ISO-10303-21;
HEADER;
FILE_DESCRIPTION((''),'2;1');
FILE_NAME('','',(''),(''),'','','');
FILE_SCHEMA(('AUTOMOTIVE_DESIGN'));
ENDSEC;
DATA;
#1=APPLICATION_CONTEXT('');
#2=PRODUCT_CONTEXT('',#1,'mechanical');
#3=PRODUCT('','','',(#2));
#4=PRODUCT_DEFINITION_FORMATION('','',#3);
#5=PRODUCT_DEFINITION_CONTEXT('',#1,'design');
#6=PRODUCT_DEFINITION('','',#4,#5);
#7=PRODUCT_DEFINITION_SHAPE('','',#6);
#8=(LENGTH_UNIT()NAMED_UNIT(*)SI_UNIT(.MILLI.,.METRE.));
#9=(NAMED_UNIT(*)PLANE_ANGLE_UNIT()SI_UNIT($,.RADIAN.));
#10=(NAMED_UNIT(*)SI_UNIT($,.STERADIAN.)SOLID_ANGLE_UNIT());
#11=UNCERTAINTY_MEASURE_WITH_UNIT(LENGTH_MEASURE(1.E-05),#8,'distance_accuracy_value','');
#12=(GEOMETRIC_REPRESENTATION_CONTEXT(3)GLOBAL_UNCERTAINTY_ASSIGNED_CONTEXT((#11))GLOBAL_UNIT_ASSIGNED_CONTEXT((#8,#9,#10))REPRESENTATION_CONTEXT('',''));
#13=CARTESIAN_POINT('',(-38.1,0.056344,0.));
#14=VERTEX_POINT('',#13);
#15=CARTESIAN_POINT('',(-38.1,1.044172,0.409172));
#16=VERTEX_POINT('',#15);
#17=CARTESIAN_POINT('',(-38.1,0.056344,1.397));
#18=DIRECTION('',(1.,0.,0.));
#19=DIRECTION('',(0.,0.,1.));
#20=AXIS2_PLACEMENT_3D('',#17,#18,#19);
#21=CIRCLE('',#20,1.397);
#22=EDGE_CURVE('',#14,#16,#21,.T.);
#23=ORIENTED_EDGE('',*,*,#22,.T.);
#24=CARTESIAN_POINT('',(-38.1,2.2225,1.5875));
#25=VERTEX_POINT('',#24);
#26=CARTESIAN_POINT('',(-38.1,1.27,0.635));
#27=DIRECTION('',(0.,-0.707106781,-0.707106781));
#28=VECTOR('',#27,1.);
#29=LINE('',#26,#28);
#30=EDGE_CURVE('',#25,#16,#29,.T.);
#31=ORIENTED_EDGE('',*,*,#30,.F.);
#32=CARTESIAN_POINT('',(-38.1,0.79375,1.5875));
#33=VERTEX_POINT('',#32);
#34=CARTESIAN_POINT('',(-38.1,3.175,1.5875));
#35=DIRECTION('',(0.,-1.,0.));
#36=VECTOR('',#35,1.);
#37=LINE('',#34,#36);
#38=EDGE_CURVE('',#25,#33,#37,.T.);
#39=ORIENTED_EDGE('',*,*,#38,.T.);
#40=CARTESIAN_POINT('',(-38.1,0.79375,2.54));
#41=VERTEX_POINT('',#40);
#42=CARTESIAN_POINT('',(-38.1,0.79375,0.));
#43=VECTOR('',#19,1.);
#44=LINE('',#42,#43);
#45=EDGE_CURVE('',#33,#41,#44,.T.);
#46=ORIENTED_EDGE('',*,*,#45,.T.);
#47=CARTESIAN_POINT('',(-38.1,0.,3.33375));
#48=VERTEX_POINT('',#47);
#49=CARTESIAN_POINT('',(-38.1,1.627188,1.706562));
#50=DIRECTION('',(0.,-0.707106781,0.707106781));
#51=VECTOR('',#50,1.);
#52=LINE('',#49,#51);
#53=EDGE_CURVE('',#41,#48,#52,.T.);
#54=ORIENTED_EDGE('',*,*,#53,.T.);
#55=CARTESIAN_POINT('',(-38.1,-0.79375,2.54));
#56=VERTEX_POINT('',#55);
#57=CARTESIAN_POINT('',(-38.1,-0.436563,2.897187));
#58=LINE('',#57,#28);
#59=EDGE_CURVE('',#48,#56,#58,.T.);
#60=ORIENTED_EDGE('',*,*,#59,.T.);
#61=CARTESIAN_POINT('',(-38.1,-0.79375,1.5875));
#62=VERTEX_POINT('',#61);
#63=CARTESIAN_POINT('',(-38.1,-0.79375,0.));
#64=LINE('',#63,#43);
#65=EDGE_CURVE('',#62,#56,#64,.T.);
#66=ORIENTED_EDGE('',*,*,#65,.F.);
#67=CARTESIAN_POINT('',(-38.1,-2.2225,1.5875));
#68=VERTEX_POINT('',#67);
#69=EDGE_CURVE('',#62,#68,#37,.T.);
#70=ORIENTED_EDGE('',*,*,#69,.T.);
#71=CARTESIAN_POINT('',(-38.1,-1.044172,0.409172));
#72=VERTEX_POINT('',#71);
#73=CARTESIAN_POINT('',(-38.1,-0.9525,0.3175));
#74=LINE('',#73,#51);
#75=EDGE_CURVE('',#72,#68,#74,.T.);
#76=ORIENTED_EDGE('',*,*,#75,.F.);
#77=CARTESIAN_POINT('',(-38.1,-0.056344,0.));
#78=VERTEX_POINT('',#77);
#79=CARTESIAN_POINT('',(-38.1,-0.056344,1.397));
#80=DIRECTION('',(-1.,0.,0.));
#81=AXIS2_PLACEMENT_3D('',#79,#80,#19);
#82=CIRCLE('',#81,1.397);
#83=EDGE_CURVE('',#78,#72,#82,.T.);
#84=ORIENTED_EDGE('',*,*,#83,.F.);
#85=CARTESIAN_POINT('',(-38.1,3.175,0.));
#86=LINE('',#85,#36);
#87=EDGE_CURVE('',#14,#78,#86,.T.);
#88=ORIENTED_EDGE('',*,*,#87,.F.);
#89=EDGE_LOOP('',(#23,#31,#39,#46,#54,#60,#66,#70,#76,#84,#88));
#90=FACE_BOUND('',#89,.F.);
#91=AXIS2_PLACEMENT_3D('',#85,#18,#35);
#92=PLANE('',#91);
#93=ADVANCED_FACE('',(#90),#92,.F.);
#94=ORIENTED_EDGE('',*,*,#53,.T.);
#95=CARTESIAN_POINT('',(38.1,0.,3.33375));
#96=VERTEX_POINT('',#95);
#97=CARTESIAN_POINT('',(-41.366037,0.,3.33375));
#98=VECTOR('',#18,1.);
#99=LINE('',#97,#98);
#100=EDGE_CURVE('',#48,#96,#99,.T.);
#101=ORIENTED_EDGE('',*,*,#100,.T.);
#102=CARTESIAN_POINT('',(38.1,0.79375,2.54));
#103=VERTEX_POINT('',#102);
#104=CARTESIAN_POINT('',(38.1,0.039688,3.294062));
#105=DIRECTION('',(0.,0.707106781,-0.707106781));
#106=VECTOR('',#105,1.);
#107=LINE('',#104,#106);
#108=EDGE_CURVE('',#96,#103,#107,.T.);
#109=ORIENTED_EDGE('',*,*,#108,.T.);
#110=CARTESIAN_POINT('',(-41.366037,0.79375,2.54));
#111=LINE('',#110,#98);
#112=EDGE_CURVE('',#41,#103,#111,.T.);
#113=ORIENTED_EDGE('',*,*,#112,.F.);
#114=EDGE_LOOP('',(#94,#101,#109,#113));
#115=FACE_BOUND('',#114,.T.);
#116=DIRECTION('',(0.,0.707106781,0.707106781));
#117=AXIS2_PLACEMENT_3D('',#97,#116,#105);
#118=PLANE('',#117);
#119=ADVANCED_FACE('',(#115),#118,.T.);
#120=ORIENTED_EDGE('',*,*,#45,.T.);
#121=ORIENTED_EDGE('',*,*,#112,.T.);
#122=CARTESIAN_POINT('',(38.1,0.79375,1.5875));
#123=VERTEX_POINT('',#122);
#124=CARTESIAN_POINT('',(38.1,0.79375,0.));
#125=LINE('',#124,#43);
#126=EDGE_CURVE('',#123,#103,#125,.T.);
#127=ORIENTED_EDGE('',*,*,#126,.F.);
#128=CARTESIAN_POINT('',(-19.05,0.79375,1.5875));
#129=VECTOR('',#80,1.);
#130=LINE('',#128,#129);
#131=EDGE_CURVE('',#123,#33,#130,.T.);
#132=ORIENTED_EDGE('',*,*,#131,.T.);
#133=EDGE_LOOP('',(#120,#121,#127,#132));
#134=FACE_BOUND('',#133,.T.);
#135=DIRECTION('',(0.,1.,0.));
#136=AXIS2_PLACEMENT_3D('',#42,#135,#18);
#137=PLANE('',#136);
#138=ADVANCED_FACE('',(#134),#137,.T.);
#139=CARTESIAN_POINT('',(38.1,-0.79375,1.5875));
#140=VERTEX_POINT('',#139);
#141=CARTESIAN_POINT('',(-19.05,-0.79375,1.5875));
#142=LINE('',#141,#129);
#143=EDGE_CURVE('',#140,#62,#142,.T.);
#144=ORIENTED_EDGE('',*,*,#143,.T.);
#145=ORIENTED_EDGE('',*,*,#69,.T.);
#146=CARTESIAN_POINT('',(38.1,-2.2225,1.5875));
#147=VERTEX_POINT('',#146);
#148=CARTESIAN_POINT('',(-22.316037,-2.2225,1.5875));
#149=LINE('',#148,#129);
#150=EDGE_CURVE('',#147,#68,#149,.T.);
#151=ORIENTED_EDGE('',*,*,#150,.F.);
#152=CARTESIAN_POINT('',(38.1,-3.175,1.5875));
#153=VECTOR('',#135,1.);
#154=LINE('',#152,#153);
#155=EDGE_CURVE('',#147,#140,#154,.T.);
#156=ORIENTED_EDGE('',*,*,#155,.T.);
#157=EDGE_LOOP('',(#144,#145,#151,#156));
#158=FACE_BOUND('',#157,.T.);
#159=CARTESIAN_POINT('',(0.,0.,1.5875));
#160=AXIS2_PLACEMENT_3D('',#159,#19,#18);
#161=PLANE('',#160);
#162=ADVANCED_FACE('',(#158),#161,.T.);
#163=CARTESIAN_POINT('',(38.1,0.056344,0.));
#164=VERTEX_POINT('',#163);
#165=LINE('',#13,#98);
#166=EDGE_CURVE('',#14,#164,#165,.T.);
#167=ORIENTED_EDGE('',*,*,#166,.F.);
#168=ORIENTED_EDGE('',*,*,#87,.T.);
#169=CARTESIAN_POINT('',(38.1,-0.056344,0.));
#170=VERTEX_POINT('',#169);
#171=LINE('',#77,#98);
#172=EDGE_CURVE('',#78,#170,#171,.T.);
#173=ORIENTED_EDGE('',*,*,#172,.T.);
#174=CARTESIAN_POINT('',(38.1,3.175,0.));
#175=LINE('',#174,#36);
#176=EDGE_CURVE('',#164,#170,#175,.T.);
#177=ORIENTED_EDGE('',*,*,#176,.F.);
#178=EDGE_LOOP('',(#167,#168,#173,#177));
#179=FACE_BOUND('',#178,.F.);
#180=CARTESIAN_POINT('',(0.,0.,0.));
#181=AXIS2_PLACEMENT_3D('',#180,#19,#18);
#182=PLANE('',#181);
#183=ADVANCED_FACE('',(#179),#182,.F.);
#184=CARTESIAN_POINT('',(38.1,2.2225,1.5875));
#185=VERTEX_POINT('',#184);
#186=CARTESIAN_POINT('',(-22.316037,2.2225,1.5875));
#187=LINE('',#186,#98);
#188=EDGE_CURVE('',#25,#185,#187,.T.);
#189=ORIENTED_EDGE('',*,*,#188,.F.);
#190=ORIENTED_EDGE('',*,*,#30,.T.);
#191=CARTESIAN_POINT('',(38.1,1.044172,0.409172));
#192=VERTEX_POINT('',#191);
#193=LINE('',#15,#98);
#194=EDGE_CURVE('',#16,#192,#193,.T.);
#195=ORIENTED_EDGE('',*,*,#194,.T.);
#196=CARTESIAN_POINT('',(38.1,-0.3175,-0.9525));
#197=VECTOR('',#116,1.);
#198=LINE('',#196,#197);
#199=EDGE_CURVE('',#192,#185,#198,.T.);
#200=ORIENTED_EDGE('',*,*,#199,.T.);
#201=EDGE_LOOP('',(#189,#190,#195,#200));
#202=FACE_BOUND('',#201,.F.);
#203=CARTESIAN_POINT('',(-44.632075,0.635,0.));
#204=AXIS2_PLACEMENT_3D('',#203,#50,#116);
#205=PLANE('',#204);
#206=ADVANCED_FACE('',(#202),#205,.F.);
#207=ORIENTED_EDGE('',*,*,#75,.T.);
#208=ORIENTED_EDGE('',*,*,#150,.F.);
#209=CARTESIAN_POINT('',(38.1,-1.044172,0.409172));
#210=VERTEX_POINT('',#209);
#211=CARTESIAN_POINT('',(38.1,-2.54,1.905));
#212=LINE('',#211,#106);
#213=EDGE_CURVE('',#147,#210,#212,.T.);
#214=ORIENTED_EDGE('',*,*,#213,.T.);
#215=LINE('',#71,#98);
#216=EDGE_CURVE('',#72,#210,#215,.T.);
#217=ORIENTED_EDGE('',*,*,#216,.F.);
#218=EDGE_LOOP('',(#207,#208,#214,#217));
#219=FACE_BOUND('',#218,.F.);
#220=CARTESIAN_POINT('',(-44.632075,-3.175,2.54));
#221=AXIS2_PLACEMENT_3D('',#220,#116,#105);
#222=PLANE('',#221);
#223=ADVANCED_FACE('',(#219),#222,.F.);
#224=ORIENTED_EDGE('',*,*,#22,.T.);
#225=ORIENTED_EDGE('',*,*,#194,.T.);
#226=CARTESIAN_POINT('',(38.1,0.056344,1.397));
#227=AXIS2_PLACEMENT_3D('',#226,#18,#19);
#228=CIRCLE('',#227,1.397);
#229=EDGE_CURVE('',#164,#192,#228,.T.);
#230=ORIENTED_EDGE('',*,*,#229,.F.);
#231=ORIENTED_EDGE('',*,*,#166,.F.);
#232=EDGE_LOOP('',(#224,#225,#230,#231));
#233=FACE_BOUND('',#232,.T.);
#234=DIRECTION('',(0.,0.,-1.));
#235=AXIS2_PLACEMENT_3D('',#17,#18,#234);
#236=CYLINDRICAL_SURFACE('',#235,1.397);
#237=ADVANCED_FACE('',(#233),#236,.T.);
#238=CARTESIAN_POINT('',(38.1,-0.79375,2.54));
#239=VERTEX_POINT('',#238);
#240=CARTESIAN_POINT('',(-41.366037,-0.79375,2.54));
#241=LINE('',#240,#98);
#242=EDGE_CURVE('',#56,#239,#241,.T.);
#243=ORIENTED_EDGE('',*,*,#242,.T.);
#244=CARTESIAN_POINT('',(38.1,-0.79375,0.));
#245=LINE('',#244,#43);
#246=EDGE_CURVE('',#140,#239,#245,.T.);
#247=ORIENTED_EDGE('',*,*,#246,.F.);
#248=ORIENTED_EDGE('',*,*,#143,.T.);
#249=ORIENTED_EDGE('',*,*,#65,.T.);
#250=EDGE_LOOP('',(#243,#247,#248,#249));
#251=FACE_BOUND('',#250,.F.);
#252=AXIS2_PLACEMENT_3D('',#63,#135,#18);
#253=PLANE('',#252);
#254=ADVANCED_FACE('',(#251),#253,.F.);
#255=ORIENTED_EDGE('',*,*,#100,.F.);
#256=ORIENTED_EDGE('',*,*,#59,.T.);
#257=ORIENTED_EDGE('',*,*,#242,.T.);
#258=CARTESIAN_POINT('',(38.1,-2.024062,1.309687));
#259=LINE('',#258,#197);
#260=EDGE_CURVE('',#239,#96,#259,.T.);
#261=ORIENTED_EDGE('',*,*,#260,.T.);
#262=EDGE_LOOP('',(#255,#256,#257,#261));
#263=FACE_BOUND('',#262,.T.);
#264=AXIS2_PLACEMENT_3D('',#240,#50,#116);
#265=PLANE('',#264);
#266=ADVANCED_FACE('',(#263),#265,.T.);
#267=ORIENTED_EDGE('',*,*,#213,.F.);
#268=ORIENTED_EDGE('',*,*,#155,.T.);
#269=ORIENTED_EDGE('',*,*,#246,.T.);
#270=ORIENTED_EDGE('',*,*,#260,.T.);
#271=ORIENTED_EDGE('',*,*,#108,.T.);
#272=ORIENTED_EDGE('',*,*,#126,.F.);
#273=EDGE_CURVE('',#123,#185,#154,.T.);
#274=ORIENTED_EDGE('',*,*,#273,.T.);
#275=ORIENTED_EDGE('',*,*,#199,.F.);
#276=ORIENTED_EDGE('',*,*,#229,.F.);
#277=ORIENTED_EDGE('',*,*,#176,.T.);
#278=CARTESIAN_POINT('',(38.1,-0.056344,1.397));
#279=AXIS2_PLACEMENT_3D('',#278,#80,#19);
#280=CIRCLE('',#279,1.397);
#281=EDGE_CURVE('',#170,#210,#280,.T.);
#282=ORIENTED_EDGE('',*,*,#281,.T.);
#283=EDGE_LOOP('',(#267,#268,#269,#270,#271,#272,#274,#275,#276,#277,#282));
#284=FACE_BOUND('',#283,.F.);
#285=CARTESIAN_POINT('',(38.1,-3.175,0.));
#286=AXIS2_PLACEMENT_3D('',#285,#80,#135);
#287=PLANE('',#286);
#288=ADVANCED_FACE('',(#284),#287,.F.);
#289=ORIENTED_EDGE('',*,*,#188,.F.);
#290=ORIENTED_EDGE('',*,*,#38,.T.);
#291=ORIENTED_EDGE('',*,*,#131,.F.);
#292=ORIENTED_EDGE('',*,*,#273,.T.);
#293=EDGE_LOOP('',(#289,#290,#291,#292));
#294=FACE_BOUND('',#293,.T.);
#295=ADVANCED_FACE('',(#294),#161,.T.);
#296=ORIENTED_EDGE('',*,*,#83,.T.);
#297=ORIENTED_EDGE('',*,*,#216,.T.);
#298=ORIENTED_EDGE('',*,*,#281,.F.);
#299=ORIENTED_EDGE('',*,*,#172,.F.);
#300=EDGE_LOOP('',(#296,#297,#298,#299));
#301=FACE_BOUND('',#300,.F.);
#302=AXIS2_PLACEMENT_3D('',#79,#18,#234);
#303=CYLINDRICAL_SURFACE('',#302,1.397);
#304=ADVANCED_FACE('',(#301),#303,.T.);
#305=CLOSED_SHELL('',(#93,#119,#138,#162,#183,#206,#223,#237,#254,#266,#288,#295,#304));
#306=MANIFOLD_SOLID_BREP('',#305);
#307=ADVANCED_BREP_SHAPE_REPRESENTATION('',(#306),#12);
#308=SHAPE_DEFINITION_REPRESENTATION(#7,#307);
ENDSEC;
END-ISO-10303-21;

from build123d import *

# Parameters (mm, degrees)
F0_W        = 76.2
F0_H        = 1.5875
F0_H_2      = 2.38125
F1_DEPTH    = 1.5875
F2_DEPTH    = 3.81
F3_T1_DEPTH = 82.7320747894
F4_T1_DEPTH = 89.2641495789
F5_R        = 1.397


# Not quite as in the source:
# - a fillet or chamfer that OpenCascade refuses, or shapes differently, is made with other operations: its cross-section is extruded or revolved along the edge and cut away or added


with BuildPart() as f1:
    # F0 (on Top) → F1 (new body)
    with BuildSketch(Plane.XY):
        Rectangle(F0_W, F0_H)
        with Locations((0, -1.984375)):
            Rectangle(F0_W, F0_H_2)
        with Locations((0, 1.984375)):
            Rectangle(F0_W, F0_H_2)
    extrude(amount=F1_DEPTH)

    # F0 (on Top) → F2 (join)
    with BuildSketch(Plane.XY):
        Rectangle(F0_W, F0_H)
    extrude(amount=F2_DEPTH)

    # F3: chamfer of 1.27 on 2 edges, made by hand

    # F3_s2 → F3_t1 (cut)
    with BuildSketch(Plane.YZ.offset(-41.3660373947)):
        Polygon((-0.79375, 2.54), (0.47625, 3.81), (-0.79375, 3.81), align=None)
        Polygon((-0.47625, 3.81), (0.79375, 2.54), (0.79375, 3.81), align=None)
    extrude(amount=F3_T1_DEPTH, mode=Mode.SUBTRACT)

    # F4: chamfer of 2.54 on 2 edges, made by hand

    # F4_s2 → F4_t1 (cut)
    with BuildSketch(Plane.YZ.offset(-44.6320747894)):
        Polygon((-3.175, 2.54), (-0.635, 0), (-3.175, 0), align=None)
        Polygon((0.635, 0), (3.175, 2.54), (3.175, 0), align=None)
    extrude(amount=F4_T1_DEPTH, mode=Mode.SUBTRACT)

    # F5
    f5_edges = [f1.edges().sort_by_distance(p)[0] for p in [
        (0, -0.635, 0),
        (0, 0.635, 0),
    ]]
    fillet(f5_edges, radius=F5_R)


solid = f1.part
